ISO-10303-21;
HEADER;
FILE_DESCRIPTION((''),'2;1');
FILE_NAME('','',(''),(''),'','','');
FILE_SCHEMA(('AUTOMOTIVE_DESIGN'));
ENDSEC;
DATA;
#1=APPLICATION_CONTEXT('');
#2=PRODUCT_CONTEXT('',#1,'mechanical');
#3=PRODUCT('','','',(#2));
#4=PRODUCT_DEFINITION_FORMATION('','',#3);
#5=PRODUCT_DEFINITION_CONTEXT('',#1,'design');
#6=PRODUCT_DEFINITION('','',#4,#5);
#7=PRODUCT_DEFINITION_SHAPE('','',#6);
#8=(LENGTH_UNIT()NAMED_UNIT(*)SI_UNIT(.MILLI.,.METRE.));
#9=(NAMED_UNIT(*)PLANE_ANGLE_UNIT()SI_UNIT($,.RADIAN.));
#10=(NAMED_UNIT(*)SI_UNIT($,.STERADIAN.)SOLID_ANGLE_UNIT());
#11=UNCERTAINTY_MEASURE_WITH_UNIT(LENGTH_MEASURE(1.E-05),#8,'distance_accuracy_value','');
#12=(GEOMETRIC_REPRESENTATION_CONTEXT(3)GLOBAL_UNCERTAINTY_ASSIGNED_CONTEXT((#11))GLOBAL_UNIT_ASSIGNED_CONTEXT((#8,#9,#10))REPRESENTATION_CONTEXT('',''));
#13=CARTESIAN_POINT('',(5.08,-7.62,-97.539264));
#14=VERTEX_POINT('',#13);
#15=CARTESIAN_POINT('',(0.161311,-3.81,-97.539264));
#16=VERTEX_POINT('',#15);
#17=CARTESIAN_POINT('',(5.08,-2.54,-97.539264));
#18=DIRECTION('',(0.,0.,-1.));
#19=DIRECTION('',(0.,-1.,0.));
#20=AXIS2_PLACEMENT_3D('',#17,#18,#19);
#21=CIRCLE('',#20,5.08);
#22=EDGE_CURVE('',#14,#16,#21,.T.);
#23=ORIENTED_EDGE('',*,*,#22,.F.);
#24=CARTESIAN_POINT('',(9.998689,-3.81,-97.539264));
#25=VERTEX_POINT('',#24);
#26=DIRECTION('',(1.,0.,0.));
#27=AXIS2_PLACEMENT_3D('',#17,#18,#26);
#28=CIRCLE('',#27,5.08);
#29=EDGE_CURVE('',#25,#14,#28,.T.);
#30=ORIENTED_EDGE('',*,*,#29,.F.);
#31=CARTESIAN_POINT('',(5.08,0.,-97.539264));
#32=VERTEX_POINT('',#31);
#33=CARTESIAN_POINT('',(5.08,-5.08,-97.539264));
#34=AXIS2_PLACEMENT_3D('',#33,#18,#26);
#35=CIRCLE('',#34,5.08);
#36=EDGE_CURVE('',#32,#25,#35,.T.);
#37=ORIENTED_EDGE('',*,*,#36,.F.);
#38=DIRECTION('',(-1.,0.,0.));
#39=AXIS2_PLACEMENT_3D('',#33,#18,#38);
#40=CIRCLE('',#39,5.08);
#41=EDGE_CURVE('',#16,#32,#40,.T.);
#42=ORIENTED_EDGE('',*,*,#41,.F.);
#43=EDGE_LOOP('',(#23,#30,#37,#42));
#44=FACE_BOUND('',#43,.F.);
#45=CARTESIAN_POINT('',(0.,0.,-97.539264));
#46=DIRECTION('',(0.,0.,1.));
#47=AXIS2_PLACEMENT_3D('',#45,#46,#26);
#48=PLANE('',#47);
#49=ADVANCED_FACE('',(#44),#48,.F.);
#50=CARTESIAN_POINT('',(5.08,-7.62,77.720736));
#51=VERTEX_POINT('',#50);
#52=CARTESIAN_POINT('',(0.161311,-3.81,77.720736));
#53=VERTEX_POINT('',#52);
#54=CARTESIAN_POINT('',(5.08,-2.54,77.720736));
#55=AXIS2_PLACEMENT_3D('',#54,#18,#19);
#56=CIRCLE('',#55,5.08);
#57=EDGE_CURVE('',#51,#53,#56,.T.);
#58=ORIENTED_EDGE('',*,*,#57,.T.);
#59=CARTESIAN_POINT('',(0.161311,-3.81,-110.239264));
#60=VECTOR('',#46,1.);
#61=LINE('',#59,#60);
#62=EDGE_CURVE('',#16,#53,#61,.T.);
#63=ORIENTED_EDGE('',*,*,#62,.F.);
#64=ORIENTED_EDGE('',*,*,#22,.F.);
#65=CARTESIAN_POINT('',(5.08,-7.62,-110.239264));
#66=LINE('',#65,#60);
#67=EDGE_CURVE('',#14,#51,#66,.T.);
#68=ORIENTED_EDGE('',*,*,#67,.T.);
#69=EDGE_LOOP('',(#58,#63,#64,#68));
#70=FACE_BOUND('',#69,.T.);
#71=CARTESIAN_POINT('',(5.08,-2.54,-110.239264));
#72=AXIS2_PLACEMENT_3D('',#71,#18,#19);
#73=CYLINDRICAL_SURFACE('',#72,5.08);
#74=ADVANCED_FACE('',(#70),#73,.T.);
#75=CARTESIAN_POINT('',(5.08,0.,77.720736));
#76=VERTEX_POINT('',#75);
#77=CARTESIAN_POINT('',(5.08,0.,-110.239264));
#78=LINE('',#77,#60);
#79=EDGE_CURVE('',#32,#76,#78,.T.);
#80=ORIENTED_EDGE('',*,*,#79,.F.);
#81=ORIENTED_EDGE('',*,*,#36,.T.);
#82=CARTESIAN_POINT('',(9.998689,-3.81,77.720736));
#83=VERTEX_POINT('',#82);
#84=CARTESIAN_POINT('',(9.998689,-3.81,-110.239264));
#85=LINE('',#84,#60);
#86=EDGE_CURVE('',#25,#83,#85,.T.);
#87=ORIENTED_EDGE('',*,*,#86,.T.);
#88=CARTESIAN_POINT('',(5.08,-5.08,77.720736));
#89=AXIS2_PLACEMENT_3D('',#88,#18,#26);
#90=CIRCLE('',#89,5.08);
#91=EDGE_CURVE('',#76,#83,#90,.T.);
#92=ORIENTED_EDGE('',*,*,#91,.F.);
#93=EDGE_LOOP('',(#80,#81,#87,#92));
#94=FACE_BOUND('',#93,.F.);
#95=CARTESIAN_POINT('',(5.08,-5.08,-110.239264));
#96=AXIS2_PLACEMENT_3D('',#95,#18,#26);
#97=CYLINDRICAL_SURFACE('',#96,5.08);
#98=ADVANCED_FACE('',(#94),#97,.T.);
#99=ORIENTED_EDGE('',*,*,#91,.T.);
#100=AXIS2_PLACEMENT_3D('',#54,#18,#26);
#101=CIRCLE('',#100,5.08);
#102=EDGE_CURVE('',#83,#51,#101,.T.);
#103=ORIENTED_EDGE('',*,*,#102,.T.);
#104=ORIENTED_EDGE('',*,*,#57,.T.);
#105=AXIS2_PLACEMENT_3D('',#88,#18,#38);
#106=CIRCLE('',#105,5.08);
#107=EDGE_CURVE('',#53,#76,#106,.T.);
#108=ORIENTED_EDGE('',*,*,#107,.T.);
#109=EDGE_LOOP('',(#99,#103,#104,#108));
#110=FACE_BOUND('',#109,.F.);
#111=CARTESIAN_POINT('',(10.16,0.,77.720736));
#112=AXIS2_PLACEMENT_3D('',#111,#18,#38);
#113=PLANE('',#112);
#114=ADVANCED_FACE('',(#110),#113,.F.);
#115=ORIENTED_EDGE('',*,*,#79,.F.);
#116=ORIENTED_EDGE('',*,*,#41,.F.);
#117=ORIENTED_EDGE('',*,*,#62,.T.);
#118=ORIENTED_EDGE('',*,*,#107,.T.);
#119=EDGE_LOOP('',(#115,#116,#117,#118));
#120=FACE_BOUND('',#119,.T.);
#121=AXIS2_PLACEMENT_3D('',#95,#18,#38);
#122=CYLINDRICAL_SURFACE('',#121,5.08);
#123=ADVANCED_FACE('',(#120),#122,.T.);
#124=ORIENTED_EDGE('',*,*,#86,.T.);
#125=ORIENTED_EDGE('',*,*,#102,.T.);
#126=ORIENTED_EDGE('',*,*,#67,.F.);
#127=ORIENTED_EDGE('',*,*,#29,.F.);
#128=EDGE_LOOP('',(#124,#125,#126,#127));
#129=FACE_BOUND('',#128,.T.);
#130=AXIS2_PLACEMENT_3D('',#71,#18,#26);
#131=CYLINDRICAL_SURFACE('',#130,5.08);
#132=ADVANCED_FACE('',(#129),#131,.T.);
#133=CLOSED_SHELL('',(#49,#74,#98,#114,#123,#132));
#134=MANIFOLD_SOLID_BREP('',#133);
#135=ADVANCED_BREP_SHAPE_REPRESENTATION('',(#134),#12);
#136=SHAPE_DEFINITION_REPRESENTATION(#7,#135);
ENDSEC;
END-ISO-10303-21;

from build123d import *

# Parameters (mm, degrees)
F1_DEPTH    = 7.62
F2_T1_DEPTH = 200.66


# Not quite as in the source:
# - a fillet or chamfer that OpenCascade refuses, or shapes differently, is made with other operations: its cross-section is extruded or revolved along the edge and cut away or added


with BuildPart() as f1:
    # F0 (on Front) → F1 (new body)
    with BuildSketch(Plane.XZ):
        Polygon((10.16, 77.7207358905), (0, 77.7207358905), (0, -72.1392641095), (0, -97.5392641095), (10.16, -97.5392641095), align=None)
    extrude(amount=F1_DEPTH)

    # F2: fillet of radius 5.08 on 4 edges, made by hand

    # F2_s2 → F2_t1 (cut)
    with BuildSketch(Plane.XY.offset(-110.2392641095)):
        with BuildLine():
            ThreePointArc((10.16, -2.54), (8.6721024484, -6.1321024484), (5.08, -7.62))
            Line((5.08, -7.62), (10.16, -7.62))
            Line((10.16, -7.62), (10.16, -2.54))
        make_face()
        with BuildLine():
            ThreePointArc((10.16, -5.08), (8.6721024484, -1.4878975516), (5.08, 0))
            Line((5.08, 0), (10.16, 0))
            Line((10.16, 0), (10.16, -5.08))
        make_face()
        with BuildLine():
            ThreePointArc((5.08, -7.62), (1.4878975516, -6.1321024484), (0, -2.54))
            Line((0, -2.54), (0, -7.62))
            Line((0, -7.62), (5.08, -7.62))
        make_face()
        with BuildLine():
            ThreePointArc((0, -5.08), (1.4878975516, -1.4878975516), (5.08, 0))
            Line((5.08, 0), (0, 0))
            Line((0, 0), (0, -5.08))
        make_face()
    extrude(amount=F2_T1_DEPTH, mode=Mode.SUBTRACT)


solid = f1.part
